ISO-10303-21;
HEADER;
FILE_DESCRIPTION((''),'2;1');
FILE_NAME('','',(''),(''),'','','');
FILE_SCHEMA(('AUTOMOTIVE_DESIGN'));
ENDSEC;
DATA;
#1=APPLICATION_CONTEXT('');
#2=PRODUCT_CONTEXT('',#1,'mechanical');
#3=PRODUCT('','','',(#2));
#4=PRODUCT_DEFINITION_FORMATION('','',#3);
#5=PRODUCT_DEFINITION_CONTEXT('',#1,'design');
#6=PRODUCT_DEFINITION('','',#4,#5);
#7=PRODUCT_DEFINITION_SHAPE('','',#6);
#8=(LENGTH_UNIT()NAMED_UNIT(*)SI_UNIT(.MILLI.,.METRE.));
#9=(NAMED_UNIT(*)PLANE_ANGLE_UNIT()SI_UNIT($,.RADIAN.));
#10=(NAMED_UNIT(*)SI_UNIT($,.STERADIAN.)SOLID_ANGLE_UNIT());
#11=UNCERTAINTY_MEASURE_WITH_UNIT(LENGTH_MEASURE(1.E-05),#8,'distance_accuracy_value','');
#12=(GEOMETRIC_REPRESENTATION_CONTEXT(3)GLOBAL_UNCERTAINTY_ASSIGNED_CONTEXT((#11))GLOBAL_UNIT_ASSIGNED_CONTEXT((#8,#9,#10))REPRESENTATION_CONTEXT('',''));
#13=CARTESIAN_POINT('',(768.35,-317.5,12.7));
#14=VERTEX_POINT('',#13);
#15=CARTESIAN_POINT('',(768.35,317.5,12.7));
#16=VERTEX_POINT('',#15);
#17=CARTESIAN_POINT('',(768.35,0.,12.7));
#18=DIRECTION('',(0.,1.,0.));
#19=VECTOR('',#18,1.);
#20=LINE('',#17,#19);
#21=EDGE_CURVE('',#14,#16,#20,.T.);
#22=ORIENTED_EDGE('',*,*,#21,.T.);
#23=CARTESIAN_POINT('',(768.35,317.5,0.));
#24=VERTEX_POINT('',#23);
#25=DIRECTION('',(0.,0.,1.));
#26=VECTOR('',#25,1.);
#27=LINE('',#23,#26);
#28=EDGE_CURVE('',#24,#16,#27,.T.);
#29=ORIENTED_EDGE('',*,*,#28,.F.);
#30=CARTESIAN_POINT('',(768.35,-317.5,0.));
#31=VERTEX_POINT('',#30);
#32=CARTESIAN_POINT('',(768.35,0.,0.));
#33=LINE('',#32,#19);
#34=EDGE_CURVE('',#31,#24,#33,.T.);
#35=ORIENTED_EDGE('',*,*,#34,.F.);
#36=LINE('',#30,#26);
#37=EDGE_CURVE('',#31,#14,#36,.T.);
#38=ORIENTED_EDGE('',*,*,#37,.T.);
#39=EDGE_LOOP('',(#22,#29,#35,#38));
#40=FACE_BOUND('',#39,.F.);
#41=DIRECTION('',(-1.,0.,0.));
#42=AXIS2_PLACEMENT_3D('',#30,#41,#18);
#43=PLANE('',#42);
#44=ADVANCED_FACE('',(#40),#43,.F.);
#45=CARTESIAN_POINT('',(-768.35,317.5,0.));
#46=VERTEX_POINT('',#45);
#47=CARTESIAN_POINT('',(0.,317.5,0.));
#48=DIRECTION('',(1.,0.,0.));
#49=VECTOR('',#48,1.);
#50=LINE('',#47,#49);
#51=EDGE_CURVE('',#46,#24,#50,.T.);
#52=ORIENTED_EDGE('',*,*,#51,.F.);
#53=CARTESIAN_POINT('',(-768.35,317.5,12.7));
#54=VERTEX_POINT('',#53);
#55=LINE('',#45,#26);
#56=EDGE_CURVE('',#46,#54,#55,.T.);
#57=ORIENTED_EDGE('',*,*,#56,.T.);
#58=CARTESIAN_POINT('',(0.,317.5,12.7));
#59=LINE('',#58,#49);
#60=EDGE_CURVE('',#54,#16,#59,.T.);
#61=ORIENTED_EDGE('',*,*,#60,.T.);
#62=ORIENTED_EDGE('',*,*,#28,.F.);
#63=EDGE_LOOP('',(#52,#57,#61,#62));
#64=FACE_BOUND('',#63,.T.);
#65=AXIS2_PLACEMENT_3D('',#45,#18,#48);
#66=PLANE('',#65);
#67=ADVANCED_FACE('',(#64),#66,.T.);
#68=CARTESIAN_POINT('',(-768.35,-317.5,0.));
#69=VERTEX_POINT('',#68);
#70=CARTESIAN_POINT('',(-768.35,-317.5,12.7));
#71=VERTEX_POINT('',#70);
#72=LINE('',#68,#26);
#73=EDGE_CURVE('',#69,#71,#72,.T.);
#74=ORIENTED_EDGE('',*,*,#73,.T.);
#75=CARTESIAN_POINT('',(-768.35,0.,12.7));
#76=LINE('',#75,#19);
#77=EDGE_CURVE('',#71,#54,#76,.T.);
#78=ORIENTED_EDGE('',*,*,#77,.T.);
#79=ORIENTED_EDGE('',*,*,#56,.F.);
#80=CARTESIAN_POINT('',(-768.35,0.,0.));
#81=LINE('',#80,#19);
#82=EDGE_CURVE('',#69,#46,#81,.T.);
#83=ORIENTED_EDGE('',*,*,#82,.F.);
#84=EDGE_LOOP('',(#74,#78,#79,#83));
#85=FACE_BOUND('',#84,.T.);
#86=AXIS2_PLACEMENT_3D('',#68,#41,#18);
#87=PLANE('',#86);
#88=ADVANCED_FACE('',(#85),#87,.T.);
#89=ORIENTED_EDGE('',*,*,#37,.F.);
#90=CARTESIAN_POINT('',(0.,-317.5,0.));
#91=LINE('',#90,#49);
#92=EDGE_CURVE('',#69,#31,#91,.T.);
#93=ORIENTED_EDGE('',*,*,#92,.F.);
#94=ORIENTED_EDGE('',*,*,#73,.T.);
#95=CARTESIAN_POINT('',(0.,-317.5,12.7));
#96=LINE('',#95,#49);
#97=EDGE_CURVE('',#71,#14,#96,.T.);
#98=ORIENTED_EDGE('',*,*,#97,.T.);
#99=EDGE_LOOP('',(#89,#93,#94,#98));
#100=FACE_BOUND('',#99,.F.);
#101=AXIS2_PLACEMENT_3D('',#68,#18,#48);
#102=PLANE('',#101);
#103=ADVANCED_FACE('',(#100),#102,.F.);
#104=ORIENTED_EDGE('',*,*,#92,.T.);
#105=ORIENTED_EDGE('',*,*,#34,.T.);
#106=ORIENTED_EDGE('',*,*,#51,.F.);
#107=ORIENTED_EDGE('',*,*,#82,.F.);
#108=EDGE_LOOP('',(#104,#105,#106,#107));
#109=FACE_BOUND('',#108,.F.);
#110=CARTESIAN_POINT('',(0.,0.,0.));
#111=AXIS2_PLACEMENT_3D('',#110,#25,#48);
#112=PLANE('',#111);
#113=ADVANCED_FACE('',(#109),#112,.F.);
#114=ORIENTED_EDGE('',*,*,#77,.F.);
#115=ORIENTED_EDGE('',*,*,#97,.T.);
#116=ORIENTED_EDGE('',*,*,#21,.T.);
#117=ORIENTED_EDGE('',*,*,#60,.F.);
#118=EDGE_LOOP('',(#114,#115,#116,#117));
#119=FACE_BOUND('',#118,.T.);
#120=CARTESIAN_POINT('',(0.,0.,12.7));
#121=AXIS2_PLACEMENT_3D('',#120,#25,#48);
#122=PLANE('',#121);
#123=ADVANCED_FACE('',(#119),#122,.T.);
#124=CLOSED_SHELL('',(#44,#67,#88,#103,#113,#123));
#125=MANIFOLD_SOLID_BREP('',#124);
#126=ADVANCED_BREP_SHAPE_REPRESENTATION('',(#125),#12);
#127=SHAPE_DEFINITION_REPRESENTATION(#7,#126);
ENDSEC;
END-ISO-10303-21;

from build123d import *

# Parameters (mm, degrees)
F0_W     = 1536.7
F0_H     = 635
F2_DEPTH = 12.7


# Not quite as in the source:
# - a variable given as a bare number and used for a length is read in inches; the dataset says mm whatever the document's units were


with BuildPart() as f2:
    # F0 (on Top) → F2 (new body)
    with BuildSketch(Plane.XY):
        Rectangle(F0_W, F0_H)
    extrude(amount=F2_DEPTH)


solid = f2.part
